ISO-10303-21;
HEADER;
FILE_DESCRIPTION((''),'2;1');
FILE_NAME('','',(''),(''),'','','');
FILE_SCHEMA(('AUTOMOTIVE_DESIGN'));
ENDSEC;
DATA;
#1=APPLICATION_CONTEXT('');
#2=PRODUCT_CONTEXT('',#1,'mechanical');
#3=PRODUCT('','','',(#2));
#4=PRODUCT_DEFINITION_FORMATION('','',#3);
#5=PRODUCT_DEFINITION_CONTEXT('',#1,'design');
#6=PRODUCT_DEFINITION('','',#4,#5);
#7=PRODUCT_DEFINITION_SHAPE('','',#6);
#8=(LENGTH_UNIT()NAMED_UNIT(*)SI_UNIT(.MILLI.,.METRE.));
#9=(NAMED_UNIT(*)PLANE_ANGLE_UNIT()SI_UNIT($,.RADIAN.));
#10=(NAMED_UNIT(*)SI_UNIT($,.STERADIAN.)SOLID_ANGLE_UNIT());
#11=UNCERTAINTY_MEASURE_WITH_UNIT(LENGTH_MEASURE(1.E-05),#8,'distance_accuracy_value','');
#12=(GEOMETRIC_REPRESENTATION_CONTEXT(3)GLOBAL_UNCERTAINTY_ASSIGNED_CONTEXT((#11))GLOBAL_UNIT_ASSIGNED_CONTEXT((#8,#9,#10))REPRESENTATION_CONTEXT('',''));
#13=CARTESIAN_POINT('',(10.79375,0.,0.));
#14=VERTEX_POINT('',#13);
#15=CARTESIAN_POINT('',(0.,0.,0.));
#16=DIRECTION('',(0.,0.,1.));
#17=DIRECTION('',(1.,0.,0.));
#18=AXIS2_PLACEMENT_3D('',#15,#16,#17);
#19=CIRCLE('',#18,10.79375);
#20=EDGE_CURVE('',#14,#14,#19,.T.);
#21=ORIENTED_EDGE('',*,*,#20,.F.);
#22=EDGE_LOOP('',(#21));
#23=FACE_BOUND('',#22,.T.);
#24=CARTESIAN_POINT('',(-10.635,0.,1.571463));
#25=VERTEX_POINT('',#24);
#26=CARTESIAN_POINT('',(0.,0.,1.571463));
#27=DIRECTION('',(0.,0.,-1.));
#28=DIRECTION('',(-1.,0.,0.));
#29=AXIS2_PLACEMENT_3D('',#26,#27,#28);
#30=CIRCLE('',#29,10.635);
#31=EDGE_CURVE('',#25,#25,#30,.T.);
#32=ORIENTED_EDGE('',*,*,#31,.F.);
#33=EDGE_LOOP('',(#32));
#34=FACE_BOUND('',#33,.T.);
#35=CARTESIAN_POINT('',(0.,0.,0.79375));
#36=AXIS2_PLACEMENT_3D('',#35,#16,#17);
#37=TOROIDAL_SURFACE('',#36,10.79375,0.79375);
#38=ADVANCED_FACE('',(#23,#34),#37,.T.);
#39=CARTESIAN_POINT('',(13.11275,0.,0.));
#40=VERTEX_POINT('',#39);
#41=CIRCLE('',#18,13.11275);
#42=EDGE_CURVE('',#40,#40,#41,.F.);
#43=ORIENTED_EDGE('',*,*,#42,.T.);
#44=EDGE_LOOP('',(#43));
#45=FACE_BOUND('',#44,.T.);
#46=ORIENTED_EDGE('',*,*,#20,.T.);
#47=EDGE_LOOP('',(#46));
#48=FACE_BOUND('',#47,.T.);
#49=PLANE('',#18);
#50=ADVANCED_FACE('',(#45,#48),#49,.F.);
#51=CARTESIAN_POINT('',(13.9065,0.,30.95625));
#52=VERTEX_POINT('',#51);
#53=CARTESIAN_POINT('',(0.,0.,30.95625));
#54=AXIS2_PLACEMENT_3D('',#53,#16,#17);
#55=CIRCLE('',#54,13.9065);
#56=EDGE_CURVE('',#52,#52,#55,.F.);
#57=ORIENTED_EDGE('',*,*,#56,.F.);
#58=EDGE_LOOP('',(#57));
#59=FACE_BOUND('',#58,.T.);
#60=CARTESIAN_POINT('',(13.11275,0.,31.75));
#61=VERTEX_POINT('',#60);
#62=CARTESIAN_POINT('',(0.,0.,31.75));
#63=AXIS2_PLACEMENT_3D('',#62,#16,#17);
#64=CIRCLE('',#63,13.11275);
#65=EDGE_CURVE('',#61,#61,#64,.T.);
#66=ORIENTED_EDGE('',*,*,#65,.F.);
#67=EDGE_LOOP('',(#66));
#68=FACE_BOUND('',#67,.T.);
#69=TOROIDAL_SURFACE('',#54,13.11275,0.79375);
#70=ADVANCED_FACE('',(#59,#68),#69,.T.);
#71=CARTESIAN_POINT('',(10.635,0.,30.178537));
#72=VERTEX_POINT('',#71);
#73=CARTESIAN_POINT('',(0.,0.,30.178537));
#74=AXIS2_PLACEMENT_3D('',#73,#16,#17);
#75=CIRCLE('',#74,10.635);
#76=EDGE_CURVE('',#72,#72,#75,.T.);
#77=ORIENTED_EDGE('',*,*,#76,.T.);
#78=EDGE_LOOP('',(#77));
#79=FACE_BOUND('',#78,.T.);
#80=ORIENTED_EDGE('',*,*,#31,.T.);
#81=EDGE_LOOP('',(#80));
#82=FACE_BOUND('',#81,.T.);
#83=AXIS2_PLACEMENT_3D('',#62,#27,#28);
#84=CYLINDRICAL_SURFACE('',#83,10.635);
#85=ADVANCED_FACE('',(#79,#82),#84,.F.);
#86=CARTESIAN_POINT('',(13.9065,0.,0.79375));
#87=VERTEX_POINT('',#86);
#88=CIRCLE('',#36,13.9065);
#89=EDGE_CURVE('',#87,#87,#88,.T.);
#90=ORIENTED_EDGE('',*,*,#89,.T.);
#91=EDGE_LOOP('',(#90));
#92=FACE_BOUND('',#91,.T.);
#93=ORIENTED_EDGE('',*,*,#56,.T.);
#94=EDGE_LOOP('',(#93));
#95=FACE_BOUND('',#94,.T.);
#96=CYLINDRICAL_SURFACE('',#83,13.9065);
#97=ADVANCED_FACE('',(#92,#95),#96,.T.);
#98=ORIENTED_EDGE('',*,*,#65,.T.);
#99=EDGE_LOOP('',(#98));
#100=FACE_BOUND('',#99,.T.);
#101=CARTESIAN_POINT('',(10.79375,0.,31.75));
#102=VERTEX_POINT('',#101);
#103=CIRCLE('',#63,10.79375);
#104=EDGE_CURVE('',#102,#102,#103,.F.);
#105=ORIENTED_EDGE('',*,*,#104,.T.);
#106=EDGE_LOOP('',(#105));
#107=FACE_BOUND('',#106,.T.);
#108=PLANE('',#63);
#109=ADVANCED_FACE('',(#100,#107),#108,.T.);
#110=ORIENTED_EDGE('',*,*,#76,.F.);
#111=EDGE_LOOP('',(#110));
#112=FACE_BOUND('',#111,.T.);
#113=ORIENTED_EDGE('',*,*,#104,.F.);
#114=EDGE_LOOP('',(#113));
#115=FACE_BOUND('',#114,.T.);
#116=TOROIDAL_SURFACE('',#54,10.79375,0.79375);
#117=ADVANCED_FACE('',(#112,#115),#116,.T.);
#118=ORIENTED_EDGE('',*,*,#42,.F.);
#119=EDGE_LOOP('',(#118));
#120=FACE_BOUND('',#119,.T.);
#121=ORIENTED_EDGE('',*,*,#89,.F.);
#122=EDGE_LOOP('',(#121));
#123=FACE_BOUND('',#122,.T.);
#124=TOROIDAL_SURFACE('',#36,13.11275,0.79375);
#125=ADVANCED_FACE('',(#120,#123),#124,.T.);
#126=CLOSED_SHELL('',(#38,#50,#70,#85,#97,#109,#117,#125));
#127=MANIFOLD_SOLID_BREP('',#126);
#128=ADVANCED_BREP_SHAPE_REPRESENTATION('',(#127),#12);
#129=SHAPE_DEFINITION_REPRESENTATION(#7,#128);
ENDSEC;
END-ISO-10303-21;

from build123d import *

# Parameters (mm, degrees)
SKETCH1_R           = 13.9065
SKETCH1_R_2         = 10
BOSS_EXTRUDE1_DEPTH = 31.75
FILLET1_R           = 0.79375


# Read off the part's stored shape, not the designer's step: Move Face3
with BuildPart() as part:
    # Sketch1 → Boss-Extrude1 (new body)
    with BuildSketch(Plane.XY):
        Circle(SKETCH1_R)
        Circle(SKETCH1_R_2, mode=Mode.SUBTRACT)
    extrude(amount=BOSS_EXTRUDE1_DEPTH)

    # Fillet1
    fillet1_edges = [part.edges().sort_by_distance(p)[0] for p in [
        (-13.9065, 0, 0),
        (-13.9065, 0, 31.75),
        (-10, 0, 0),
        (-10, 0, 31.75),
    ]]
    fillet(fillet1_edges, radius=FILLET1_R)

    # Move Face3 outline → Move Face3 (revolve, cut)
    with BuildSketch(Plane.XZ):
        with BuildLine():
            Line((10.635, 1.571462993), (10.635, 30.178537007))
            ThreePointArc((10.635, 30.178537007), (10.178913894, 30.454238422), (10, 30.95625))
            Line((10, 30.95625), (10, 0.79375))
            ThreePointArc((10, 0.79375), (10.178913894, 1.295761578), (10.635, 1.571462993))
        make_face()
    revolve(axis=Axis((0, 0, 0), (0, 0, 1)), mode=Mode.SUBTRACT)


solid = part.part
